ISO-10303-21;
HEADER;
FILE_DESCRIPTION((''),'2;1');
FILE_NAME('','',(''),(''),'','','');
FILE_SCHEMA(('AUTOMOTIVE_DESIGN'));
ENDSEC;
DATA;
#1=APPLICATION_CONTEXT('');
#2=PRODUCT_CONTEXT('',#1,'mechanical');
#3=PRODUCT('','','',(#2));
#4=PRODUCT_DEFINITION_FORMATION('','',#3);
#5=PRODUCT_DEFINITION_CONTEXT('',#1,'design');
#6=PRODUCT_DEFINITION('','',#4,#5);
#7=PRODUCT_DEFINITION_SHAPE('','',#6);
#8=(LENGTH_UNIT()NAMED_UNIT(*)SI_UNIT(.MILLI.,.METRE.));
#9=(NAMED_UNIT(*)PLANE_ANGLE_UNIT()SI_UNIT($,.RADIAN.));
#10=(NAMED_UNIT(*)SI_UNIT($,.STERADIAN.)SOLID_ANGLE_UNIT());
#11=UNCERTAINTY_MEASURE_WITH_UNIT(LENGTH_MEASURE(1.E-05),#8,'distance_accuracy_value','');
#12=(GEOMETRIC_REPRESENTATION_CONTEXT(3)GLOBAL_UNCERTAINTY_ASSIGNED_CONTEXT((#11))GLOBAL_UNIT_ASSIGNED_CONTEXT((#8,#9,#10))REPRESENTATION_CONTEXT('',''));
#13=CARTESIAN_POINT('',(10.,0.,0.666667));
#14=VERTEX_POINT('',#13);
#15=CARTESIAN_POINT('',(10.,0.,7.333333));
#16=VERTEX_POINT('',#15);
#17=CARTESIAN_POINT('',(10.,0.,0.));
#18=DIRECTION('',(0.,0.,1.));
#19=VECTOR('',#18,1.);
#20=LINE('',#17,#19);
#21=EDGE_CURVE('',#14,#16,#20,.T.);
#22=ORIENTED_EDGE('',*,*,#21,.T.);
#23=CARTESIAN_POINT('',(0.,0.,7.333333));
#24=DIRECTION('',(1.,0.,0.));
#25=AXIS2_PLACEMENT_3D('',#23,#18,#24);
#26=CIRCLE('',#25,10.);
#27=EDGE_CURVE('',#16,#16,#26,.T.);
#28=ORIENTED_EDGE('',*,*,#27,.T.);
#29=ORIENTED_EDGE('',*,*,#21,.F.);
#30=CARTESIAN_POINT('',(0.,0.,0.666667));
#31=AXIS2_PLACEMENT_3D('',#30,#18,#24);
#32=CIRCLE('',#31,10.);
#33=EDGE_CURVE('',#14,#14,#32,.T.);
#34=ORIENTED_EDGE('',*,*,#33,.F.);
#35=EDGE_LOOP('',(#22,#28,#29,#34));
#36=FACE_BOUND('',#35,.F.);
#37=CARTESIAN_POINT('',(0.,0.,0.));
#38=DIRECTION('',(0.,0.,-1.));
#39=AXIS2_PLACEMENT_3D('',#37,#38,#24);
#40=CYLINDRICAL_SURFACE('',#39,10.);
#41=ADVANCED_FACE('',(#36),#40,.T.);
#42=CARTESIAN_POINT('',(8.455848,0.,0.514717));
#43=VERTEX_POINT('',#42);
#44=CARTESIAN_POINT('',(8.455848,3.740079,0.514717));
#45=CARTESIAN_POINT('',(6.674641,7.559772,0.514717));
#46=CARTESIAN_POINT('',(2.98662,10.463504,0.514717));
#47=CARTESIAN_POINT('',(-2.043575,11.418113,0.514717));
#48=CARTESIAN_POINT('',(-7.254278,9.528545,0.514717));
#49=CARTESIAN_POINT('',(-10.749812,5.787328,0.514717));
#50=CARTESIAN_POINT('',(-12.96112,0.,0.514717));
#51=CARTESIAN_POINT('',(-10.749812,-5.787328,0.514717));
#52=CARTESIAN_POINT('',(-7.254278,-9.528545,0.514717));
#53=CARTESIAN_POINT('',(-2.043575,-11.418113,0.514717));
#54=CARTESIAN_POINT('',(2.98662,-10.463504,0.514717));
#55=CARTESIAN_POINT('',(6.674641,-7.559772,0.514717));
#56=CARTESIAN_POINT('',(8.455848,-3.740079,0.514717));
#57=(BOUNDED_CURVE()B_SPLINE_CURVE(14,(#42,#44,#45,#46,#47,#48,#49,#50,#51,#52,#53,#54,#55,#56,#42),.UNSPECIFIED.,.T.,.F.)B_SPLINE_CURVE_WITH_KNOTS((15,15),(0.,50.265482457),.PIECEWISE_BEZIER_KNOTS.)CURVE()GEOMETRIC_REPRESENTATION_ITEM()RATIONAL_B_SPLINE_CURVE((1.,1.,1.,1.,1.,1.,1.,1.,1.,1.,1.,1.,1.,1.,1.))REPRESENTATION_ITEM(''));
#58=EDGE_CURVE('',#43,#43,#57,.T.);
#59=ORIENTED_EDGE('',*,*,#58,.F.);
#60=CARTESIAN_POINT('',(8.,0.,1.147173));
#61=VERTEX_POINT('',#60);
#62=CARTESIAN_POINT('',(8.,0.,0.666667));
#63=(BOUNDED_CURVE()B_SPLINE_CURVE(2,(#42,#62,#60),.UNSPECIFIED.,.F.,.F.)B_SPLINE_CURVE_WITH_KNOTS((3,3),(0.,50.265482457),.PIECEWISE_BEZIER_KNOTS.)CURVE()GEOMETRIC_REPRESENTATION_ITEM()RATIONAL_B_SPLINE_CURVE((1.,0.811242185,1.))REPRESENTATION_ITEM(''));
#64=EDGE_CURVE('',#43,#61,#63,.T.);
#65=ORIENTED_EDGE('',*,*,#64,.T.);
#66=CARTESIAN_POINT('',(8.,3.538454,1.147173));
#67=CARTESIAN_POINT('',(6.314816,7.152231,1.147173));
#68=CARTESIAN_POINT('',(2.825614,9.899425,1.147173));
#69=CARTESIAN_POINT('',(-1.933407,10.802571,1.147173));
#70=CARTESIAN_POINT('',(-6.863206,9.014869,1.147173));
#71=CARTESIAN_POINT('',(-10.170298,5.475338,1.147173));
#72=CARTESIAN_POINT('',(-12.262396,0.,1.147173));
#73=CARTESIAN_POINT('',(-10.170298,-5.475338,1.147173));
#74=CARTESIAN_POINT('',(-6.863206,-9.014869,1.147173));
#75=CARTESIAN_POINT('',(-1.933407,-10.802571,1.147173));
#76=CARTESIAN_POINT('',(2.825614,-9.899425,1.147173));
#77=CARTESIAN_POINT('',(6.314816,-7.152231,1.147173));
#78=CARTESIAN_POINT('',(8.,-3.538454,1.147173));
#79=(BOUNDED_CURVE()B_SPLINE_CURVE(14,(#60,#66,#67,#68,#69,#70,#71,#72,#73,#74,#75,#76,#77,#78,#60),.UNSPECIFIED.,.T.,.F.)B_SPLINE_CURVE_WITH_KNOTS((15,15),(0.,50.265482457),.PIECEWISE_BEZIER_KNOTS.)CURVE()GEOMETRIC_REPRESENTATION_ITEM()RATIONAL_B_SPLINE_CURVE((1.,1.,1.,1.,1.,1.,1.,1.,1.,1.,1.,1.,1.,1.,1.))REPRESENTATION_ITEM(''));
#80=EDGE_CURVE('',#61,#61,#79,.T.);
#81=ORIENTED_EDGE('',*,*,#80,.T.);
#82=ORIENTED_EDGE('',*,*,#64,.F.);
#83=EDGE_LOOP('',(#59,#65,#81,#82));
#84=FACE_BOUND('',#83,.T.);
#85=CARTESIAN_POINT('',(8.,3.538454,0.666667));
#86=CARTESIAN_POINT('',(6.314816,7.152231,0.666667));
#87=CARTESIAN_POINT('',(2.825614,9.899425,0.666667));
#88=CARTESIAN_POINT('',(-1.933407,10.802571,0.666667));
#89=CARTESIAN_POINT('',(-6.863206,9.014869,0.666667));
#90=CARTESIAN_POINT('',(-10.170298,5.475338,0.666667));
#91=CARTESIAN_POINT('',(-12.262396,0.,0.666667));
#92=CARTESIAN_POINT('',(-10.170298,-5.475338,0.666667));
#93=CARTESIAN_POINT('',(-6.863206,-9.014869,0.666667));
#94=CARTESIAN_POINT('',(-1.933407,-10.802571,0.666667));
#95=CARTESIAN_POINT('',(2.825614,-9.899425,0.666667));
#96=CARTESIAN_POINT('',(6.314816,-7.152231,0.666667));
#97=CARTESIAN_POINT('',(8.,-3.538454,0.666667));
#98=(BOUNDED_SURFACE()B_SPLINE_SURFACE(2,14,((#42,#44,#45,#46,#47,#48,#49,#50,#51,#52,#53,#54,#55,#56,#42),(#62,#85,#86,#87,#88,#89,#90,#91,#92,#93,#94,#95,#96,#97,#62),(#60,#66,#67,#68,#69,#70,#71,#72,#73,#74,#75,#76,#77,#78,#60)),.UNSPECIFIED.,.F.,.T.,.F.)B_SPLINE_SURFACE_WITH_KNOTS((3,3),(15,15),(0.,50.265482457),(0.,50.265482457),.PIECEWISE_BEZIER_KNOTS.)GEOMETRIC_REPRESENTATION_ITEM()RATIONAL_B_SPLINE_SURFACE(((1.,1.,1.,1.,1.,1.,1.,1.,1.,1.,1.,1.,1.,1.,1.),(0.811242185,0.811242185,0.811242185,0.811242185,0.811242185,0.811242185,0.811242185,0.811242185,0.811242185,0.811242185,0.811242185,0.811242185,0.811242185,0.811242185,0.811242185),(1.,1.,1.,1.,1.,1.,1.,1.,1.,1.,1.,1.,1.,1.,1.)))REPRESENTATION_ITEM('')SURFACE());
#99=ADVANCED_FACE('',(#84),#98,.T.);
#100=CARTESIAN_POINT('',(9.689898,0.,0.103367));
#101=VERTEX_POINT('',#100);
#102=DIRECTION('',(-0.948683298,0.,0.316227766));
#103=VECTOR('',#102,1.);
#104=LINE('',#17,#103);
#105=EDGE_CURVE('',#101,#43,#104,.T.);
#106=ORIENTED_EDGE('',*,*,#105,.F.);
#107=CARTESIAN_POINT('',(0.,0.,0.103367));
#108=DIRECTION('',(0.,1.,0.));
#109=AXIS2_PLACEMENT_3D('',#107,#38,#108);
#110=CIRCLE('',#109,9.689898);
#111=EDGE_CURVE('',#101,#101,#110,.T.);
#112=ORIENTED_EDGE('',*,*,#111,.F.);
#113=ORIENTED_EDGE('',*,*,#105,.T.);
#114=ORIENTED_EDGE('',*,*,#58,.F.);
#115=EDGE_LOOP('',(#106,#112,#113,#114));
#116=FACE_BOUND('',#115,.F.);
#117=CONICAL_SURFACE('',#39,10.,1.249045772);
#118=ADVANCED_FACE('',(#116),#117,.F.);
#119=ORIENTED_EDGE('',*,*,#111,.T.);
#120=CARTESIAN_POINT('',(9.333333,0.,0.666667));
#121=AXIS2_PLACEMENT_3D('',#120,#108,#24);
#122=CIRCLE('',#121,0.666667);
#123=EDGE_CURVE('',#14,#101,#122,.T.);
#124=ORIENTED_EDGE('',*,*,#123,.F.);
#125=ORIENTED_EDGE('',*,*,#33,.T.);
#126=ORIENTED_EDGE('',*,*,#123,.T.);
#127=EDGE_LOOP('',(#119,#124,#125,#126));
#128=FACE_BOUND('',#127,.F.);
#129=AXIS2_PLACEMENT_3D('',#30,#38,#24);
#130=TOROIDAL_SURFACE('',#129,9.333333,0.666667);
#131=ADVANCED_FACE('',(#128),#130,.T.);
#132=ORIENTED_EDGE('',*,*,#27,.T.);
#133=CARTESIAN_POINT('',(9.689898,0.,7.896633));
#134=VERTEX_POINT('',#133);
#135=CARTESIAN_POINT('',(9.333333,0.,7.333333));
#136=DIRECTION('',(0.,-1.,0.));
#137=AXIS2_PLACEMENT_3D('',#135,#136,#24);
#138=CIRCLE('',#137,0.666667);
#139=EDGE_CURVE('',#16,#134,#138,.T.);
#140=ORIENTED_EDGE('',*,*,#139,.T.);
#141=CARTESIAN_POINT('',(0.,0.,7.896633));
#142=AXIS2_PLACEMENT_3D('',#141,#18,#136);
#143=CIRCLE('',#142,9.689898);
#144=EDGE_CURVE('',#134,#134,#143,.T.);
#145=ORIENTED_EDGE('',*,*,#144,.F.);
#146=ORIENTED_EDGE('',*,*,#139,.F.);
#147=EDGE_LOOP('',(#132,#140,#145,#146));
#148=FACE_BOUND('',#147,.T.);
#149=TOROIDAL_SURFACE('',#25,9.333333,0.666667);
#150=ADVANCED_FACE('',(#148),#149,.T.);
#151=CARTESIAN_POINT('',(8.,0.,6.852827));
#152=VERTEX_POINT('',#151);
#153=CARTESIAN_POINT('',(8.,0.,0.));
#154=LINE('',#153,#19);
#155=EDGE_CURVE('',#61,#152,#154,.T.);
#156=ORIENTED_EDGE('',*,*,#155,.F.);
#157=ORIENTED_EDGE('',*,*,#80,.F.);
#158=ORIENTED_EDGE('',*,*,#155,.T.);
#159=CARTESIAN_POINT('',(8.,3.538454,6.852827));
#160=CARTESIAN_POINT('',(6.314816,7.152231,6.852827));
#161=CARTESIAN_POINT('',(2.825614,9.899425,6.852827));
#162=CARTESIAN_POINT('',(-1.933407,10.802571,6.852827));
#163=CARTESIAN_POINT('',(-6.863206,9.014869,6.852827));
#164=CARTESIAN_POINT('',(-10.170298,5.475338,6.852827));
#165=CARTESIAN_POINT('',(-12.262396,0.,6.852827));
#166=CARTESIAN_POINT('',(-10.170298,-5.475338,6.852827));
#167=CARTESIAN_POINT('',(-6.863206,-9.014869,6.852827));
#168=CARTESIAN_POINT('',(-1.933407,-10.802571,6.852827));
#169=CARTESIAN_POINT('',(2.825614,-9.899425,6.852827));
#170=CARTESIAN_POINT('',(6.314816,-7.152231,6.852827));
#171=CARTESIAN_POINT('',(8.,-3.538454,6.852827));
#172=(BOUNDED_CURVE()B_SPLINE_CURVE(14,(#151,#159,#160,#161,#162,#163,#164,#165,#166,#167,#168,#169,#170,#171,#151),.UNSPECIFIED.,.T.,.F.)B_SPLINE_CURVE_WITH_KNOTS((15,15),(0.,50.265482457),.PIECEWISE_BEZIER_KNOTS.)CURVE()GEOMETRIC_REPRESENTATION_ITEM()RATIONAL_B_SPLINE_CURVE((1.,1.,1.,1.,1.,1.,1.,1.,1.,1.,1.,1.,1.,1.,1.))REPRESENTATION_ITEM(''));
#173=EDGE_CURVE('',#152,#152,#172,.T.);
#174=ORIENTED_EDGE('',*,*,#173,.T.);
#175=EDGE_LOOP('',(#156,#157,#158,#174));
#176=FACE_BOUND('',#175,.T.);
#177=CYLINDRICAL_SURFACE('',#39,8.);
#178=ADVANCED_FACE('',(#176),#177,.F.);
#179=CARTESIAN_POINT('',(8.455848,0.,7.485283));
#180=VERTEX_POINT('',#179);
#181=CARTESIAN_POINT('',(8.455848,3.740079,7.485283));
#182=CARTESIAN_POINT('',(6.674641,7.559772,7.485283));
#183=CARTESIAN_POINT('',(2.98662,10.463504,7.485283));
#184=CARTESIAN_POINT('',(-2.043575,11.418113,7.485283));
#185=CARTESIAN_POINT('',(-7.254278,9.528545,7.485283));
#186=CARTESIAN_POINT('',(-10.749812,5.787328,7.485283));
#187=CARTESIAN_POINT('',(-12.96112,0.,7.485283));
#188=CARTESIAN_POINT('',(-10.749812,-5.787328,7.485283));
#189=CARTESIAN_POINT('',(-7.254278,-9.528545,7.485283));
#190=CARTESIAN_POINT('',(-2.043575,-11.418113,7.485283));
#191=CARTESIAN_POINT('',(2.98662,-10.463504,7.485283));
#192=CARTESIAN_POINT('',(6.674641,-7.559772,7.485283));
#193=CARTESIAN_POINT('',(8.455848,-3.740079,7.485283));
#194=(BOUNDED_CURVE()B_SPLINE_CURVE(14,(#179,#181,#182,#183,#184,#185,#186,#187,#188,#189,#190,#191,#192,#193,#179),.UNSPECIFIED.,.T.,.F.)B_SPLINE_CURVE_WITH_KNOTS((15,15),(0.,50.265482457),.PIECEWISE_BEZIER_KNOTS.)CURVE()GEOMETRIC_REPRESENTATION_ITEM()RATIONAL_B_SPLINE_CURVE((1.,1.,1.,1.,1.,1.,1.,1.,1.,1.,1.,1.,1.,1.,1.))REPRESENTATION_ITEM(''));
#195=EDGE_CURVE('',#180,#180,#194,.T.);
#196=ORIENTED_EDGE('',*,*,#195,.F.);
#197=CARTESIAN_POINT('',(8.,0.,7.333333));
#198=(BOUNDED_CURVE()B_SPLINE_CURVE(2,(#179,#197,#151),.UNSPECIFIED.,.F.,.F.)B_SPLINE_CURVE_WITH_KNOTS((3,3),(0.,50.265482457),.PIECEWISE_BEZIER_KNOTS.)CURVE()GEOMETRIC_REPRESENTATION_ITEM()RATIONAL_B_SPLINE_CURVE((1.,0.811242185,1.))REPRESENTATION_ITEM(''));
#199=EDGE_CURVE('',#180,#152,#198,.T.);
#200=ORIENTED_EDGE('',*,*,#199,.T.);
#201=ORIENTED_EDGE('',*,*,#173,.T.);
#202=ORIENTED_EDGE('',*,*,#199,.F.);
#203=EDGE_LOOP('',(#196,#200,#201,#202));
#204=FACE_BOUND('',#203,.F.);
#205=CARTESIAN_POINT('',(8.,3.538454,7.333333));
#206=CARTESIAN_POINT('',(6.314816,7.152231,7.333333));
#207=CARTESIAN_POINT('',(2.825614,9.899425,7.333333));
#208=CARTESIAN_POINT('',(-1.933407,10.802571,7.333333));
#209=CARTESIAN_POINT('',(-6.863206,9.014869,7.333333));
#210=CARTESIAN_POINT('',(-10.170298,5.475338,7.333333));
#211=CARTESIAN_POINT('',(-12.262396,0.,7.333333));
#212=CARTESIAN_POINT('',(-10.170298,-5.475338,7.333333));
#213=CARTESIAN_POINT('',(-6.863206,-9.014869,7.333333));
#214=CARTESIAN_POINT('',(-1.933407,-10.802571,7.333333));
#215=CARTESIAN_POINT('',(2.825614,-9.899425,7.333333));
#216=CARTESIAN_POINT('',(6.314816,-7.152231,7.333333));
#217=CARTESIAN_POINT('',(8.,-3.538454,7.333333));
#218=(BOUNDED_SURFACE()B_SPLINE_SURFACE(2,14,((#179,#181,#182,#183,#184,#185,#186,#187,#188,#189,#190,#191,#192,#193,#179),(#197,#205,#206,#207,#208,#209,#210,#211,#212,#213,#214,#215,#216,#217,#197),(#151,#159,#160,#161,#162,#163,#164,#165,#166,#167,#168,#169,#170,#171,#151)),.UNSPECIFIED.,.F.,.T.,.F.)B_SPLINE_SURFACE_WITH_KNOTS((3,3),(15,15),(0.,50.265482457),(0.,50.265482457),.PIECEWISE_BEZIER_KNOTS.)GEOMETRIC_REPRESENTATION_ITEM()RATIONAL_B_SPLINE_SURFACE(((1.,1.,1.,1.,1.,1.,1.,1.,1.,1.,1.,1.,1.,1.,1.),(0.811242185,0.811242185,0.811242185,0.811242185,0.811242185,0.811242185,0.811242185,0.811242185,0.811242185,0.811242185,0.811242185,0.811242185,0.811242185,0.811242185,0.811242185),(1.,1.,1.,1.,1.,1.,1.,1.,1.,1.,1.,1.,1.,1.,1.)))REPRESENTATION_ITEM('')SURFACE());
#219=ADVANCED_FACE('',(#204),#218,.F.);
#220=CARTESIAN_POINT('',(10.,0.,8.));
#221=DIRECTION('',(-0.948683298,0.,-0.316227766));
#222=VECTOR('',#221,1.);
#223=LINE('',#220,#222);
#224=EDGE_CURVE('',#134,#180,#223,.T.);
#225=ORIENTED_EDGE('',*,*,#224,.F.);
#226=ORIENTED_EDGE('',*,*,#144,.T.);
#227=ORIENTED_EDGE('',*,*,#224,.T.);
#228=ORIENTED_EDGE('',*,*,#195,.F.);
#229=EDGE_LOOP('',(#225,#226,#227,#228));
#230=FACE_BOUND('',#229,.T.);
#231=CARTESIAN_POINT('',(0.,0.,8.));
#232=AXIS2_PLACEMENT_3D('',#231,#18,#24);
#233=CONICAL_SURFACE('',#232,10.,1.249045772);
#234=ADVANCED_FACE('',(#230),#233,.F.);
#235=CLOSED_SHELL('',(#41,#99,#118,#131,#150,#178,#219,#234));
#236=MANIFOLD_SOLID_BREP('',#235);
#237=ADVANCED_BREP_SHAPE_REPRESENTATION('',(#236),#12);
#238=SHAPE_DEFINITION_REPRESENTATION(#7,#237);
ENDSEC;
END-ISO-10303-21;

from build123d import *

# Parameters (mm, degrees)
F2_R     = 10
F2_R_2   = 8
F3_DEPTH = 8
F4_R     = 0.6666666667
F6_R     = 0.6666666667


# Not quite as in the source:
# - a fillet or chamfer that OpenCascade refuses, or shapes differently, is made with other operations: its cross-section is extruded or revolved along the edge and cut away or added


with BuildPart() as f3:
    # F2 (on Top) → F3 (new body)
    with BuildSketch(Plane.XY):
        Circle(F2_R)
        Circle(F2_R_2, mode=Mode.SUBTRACT)
    extrude(amount=F3_DEPTH)

    # F4
    f4_edges = [f3.edges().sort_by_distance(p)[0] for p in [
        (-10, 0, 8),
        (-10, 0, 0),
    ]]
    fillet(f4_edges, radius=F4_R)

    # F5: chamfer of 2 x 0.6666666667 on 2 edges, made by hand

    # F5_s1 → F5_t2 (revolve, cut)
    with BuildSketch(Plane.XZ):
        Polygon((10, 0), (8, 0.6666666667), (8, 0), align=None)
    revolve(axis=Axis((0, 0, 0), (0, 0, 1)), mode=Mode.SUBTRACT)

    # F5_s3 → F5_t4 (revolve, cut)
    with BuildSketch(Plane.XZ):
        Polygon((10, 8), (8, 7.3333333333), (8, 8), align=None)
    revolve(axis=Axis((0, 0, 8), (0, 0, 1)), mode=Mode.SUBTRACT)

    # F6
    f6_edges = [f3.edges().sort_by_distance(p)[0] for p in [
        (-8, 0, 7.333333),
        (-8, 0, 0.666667),
    ]]
    fillet(f6_edges, radius=F6_R)


solid = f3.part
